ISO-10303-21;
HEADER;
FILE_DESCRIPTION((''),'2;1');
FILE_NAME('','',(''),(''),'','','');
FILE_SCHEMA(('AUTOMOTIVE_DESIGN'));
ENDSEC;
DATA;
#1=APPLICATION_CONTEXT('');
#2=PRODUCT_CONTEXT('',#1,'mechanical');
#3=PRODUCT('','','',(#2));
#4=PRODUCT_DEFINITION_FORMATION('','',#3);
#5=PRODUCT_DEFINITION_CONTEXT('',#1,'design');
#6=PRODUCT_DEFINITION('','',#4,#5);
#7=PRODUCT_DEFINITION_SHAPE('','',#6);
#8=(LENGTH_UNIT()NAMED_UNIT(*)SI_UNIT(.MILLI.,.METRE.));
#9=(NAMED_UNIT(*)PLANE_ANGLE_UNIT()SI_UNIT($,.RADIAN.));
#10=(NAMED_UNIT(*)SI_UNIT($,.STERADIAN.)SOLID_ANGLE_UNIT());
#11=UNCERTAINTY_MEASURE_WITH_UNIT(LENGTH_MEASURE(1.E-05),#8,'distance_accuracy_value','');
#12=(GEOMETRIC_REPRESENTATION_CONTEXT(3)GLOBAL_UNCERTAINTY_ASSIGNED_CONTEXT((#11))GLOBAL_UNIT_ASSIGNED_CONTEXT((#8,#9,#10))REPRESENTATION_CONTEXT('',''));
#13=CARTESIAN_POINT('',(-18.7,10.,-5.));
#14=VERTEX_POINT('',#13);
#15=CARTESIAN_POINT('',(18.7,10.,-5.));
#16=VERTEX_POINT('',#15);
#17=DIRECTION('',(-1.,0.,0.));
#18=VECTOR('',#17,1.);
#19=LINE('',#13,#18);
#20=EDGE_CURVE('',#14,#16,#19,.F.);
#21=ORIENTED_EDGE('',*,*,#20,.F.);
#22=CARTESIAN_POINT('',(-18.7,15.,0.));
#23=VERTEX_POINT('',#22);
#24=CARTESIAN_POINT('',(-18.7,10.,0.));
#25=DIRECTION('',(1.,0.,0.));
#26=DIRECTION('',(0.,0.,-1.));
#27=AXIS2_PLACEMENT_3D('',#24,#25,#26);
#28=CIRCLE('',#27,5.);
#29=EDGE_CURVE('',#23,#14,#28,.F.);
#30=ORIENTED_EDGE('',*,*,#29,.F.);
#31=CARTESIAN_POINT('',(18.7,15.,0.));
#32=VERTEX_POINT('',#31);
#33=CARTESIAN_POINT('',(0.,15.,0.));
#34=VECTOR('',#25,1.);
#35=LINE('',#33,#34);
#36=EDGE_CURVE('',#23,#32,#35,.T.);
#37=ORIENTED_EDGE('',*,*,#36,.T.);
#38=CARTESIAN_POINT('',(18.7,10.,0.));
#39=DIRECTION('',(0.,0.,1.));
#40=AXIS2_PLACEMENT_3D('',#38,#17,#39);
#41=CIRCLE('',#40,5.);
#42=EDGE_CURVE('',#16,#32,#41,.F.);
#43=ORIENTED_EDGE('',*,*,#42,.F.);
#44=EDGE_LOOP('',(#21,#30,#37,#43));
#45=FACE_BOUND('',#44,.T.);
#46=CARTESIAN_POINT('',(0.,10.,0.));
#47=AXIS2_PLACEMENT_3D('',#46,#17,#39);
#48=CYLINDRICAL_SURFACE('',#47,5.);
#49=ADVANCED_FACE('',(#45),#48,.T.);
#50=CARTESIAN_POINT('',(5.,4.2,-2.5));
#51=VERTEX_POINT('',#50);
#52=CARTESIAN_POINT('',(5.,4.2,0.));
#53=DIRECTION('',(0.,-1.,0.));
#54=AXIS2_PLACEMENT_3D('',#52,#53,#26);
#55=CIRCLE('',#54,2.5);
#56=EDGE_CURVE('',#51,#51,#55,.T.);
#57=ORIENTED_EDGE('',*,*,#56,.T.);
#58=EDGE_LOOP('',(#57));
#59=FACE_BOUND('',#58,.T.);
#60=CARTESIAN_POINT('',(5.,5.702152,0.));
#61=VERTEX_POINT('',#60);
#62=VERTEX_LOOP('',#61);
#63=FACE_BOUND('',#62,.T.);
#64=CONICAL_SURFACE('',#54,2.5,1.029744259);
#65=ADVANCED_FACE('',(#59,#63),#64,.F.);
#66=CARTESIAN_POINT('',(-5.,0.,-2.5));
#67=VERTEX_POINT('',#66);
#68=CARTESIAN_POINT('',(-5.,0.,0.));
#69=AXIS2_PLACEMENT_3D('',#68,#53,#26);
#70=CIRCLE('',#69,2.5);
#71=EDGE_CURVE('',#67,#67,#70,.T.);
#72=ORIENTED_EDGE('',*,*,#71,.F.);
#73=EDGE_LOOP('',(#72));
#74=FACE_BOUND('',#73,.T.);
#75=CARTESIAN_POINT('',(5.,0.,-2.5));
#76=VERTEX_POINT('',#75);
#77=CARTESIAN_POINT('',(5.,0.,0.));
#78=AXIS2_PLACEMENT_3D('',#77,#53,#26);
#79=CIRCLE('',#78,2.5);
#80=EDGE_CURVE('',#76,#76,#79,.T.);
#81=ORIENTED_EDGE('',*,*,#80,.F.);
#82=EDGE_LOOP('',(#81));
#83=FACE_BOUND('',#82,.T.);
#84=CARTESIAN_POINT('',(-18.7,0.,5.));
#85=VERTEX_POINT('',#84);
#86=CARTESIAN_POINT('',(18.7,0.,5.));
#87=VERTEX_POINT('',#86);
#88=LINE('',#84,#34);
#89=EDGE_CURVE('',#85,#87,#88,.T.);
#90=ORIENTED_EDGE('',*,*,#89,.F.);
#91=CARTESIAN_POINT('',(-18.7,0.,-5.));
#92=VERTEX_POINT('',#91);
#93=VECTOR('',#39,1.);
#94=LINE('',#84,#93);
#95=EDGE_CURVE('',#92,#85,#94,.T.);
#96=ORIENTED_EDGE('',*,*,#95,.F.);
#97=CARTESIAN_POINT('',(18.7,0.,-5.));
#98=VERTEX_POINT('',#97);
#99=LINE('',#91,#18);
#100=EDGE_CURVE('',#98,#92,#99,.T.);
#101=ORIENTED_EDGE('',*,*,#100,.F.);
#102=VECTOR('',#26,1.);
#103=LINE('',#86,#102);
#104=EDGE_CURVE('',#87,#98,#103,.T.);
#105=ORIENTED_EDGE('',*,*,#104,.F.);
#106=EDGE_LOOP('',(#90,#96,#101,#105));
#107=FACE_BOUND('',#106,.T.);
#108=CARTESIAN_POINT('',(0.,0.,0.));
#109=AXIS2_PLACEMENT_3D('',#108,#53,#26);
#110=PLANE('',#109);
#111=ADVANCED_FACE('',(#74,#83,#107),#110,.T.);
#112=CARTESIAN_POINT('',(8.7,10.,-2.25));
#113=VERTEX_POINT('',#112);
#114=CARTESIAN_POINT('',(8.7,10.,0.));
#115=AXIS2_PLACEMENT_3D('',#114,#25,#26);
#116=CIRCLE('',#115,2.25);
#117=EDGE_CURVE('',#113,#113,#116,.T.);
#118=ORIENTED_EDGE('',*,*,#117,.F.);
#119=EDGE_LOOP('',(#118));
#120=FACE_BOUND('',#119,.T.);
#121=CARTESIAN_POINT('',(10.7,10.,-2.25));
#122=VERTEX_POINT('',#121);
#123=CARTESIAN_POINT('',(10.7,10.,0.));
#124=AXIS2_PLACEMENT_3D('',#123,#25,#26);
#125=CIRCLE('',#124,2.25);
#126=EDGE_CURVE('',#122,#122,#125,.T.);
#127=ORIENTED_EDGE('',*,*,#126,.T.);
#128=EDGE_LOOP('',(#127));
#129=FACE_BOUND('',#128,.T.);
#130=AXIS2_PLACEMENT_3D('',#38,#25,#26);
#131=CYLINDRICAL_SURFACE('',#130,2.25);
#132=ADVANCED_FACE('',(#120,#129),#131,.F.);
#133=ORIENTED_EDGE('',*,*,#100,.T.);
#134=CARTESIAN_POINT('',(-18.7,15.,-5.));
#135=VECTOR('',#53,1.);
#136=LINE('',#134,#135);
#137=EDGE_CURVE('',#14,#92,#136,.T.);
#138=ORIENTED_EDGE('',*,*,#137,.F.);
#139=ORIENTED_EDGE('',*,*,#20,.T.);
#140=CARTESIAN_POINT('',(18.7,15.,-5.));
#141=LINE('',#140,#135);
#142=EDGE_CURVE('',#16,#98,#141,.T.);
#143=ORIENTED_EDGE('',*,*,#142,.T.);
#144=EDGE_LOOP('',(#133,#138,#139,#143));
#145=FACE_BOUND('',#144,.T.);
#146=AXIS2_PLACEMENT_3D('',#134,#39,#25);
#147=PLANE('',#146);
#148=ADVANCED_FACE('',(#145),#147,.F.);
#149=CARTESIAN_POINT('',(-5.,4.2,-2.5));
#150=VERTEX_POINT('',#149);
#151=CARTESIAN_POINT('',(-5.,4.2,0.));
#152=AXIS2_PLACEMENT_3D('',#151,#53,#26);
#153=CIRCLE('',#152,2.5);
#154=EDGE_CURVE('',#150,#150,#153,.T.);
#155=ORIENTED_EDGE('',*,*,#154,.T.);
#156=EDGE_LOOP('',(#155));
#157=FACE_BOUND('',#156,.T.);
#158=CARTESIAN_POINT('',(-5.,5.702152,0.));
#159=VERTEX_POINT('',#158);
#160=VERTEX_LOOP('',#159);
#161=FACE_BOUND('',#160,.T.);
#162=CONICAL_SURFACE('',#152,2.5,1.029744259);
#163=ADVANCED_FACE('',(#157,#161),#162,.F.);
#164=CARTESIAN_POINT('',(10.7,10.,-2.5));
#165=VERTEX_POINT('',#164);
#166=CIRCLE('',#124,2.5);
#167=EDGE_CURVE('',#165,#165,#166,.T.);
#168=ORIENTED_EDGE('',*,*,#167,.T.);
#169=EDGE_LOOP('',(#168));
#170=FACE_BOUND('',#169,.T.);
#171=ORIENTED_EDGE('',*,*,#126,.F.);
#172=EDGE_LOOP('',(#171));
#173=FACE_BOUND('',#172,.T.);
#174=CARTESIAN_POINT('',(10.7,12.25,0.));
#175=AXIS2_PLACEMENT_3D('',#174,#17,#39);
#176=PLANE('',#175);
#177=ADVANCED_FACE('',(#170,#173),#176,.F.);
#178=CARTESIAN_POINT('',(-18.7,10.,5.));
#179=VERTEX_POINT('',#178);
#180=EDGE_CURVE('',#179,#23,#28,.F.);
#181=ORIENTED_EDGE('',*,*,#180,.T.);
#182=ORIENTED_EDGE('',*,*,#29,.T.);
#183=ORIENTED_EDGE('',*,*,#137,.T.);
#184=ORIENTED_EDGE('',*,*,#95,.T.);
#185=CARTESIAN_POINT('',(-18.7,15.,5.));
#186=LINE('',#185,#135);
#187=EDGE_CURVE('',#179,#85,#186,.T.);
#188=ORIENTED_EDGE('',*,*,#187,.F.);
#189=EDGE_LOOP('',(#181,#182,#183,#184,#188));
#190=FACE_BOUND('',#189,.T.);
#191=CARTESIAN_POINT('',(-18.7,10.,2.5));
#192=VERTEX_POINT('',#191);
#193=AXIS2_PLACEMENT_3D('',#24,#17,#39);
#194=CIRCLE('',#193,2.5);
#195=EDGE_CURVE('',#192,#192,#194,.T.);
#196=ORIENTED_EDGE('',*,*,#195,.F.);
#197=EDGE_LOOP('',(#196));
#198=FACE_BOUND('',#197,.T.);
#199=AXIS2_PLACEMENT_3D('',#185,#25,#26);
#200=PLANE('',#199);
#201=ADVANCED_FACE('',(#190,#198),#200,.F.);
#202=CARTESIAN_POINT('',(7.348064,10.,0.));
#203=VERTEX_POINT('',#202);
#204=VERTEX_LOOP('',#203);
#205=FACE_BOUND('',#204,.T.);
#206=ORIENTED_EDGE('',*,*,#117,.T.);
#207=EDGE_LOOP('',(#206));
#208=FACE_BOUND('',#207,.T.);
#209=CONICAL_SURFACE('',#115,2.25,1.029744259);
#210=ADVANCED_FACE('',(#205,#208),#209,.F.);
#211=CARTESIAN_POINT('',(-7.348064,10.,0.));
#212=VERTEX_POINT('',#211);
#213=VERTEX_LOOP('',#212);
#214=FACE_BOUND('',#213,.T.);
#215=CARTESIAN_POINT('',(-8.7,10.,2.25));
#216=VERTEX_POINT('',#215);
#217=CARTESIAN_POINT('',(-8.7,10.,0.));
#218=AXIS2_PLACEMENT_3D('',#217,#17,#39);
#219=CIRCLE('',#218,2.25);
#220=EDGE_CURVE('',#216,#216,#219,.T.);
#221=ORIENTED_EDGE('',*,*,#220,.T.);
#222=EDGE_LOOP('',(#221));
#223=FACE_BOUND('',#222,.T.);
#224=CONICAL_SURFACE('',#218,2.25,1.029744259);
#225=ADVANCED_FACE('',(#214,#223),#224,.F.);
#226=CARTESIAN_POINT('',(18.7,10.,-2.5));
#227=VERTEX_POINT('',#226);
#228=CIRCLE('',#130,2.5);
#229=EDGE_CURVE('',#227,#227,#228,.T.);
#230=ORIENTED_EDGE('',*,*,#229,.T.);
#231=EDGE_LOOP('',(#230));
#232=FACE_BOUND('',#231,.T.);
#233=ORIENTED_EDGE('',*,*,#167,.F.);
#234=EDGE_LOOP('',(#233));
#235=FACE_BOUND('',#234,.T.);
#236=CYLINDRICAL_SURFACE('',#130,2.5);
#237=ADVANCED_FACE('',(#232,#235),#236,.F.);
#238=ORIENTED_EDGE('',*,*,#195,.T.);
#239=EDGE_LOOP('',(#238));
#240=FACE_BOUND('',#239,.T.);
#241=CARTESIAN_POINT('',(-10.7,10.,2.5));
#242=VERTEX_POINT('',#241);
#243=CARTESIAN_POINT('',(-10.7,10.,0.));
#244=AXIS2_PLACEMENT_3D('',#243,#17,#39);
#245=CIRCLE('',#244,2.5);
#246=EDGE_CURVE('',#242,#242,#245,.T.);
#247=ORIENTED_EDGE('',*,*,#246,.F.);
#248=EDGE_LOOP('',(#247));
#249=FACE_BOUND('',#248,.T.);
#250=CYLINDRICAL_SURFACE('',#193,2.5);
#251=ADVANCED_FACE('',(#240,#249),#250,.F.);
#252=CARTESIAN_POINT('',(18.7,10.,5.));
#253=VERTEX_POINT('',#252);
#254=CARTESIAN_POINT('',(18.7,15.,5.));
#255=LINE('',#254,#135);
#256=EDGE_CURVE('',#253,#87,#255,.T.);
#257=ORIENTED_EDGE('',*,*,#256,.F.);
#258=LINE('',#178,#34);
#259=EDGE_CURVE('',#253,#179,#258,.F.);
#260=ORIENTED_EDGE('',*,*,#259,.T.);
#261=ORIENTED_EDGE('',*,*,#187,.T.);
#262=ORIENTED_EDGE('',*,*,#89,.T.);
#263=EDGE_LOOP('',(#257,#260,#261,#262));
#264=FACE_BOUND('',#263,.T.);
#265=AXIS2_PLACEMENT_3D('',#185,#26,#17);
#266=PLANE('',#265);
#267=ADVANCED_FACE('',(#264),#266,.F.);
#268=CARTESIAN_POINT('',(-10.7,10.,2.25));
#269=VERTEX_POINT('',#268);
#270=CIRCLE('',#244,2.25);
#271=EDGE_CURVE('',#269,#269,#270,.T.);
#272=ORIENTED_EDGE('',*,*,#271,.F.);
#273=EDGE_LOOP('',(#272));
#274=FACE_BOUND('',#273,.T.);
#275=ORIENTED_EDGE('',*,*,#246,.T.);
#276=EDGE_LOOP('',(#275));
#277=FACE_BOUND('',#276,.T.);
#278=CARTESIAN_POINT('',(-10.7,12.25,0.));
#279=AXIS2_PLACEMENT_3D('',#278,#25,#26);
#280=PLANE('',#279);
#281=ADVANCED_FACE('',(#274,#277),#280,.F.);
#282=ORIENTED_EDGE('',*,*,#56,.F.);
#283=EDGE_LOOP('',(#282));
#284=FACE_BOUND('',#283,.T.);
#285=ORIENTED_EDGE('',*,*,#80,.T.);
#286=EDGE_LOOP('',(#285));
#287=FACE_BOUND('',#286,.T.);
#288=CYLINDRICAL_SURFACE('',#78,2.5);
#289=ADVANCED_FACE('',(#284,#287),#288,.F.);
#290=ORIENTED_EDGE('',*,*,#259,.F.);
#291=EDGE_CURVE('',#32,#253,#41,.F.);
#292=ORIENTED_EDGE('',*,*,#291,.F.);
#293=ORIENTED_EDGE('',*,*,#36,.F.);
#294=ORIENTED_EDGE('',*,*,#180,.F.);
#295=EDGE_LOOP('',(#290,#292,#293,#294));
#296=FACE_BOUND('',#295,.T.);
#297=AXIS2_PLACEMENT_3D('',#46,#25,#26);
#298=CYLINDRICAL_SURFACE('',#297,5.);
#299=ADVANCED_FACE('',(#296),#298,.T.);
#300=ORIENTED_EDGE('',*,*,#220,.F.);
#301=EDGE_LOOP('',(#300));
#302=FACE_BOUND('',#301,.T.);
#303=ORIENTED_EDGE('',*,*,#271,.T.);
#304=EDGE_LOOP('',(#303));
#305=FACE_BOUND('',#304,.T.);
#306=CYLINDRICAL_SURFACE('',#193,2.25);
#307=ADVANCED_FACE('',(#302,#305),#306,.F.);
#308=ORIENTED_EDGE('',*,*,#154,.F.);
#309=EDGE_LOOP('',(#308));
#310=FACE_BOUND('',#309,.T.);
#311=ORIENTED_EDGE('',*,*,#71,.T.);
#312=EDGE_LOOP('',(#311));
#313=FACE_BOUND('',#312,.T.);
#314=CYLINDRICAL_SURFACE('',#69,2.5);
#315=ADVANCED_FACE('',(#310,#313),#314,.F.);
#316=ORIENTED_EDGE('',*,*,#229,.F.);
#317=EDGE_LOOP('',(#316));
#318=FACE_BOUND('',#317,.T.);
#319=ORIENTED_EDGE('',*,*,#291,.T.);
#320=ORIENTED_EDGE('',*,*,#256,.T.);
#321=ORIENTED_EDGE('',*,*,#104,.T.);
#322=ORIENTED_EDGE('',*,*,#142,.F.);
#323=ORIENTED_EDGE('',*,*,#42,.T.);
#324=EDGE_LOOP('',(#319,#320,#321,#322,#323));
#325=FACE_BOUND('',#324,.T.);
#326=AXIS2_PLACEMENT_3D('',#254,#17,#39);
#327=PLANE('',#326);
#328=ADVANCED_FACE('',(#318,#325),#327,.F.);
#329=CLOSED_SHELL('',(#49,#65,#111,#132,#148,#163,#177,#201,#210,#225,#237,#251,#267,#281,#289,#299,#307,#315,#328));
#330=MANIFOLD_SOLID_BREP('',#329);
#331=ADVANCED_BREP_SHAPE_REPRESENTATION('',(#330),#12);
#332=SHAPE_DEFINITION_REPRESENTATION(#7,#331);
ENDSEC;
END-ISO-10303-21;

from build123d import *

# Parameters (mm, degrees)
SKETCH1_W                 = 37.4
SKETCH1_H                 = 10
BOSS_EXTRUDE1_DEPTH       = 15
FILLET1_R                 = 5
F_1_0MM_DOWEL_HOLE1_D     = 5
F_1_0MM_DOWEL_HOLE1_DEPTH = 4.2
F_1_0MM_DOWEL_HOLE1_TIP   = 1.502151548


with BuildPart() as part:
    # Sketch1 → Boss-Extrude1 (new body)
    with BuildSketch(Plane(origin=(0, 0, 0), x_dir=(1, 0, 0), z_dir=(0, 1, 0))):
        Rectangle(SKETCH1_W, SKETCH1_H)
    extrude(amount=BOSS_EXTRUDE1_DEPTH)

    # Fillet1
    fillet1_edges = [part.edges().sort_by_distance(p)[0] for p in [
        (0, 15, -5),
        (0, 15, 5),
    ]]
    fillet(fillet1_edges, radius=FILLET1_R - 0.0001)  # a hair under: the kernel refuses the full size

    # Sketch11 → CBORE for M5 Hex Head Bolt2 (revolve, cut)
    with BuildSketch(Plane(origin=(-18.7, 10, 0), x_dir=(0, 0, 1), z_dir=(0, 1, 0))):
        Polygon((0, 0), (0, 11.351936393), (2.25, 10), (2.25, 8), (2.5, 8), (2.5, 0), align=None)
    cbore_for_m5_hex_head_bolt2 = revolve(axis=Axis((-25.05, 10, 0), (1, 0, 0)), mode=Mode.SUBTRACT)

    # Mirror1: CBORE for M5 Hex Head Bolt2 across plane
    add(cbore_for_m5_hex_head_bolt2.mirror(Plane(origin=(0, 0, 0), x_dir=(0, 0, 1), z_dir=(1, 0, 0))), mode=Mode.SUBTRACT)

    # Ø1.0mm Dowel Hole1
    with Locations(Plane(origin=(0, 0, 0), x_dir=(-1, 0, 0), z_dir=(0, -1, 0))):
        with Locations((-5, 0), (5, 0)):
            Hole(F_1_0MM_DOWEL_HOLE1_D / 2, depth=F_1_0MM_DOWEL_HOLE1_DEPTH)
            with Locations((0, 0, -(F_1_0MM_DOWEL_HOLE1_DEPTH + F_1_0MM_DOWEL_HOLE1_TIP / 2))):  # 118° drill point
                Cone(0, F_1_0MM_DOWEL_HOLE1_D / 2, F_1_0MM_DOWEL_HOLE1_TIP, mode=Mode.SUBTRACT)


solid = part.part
